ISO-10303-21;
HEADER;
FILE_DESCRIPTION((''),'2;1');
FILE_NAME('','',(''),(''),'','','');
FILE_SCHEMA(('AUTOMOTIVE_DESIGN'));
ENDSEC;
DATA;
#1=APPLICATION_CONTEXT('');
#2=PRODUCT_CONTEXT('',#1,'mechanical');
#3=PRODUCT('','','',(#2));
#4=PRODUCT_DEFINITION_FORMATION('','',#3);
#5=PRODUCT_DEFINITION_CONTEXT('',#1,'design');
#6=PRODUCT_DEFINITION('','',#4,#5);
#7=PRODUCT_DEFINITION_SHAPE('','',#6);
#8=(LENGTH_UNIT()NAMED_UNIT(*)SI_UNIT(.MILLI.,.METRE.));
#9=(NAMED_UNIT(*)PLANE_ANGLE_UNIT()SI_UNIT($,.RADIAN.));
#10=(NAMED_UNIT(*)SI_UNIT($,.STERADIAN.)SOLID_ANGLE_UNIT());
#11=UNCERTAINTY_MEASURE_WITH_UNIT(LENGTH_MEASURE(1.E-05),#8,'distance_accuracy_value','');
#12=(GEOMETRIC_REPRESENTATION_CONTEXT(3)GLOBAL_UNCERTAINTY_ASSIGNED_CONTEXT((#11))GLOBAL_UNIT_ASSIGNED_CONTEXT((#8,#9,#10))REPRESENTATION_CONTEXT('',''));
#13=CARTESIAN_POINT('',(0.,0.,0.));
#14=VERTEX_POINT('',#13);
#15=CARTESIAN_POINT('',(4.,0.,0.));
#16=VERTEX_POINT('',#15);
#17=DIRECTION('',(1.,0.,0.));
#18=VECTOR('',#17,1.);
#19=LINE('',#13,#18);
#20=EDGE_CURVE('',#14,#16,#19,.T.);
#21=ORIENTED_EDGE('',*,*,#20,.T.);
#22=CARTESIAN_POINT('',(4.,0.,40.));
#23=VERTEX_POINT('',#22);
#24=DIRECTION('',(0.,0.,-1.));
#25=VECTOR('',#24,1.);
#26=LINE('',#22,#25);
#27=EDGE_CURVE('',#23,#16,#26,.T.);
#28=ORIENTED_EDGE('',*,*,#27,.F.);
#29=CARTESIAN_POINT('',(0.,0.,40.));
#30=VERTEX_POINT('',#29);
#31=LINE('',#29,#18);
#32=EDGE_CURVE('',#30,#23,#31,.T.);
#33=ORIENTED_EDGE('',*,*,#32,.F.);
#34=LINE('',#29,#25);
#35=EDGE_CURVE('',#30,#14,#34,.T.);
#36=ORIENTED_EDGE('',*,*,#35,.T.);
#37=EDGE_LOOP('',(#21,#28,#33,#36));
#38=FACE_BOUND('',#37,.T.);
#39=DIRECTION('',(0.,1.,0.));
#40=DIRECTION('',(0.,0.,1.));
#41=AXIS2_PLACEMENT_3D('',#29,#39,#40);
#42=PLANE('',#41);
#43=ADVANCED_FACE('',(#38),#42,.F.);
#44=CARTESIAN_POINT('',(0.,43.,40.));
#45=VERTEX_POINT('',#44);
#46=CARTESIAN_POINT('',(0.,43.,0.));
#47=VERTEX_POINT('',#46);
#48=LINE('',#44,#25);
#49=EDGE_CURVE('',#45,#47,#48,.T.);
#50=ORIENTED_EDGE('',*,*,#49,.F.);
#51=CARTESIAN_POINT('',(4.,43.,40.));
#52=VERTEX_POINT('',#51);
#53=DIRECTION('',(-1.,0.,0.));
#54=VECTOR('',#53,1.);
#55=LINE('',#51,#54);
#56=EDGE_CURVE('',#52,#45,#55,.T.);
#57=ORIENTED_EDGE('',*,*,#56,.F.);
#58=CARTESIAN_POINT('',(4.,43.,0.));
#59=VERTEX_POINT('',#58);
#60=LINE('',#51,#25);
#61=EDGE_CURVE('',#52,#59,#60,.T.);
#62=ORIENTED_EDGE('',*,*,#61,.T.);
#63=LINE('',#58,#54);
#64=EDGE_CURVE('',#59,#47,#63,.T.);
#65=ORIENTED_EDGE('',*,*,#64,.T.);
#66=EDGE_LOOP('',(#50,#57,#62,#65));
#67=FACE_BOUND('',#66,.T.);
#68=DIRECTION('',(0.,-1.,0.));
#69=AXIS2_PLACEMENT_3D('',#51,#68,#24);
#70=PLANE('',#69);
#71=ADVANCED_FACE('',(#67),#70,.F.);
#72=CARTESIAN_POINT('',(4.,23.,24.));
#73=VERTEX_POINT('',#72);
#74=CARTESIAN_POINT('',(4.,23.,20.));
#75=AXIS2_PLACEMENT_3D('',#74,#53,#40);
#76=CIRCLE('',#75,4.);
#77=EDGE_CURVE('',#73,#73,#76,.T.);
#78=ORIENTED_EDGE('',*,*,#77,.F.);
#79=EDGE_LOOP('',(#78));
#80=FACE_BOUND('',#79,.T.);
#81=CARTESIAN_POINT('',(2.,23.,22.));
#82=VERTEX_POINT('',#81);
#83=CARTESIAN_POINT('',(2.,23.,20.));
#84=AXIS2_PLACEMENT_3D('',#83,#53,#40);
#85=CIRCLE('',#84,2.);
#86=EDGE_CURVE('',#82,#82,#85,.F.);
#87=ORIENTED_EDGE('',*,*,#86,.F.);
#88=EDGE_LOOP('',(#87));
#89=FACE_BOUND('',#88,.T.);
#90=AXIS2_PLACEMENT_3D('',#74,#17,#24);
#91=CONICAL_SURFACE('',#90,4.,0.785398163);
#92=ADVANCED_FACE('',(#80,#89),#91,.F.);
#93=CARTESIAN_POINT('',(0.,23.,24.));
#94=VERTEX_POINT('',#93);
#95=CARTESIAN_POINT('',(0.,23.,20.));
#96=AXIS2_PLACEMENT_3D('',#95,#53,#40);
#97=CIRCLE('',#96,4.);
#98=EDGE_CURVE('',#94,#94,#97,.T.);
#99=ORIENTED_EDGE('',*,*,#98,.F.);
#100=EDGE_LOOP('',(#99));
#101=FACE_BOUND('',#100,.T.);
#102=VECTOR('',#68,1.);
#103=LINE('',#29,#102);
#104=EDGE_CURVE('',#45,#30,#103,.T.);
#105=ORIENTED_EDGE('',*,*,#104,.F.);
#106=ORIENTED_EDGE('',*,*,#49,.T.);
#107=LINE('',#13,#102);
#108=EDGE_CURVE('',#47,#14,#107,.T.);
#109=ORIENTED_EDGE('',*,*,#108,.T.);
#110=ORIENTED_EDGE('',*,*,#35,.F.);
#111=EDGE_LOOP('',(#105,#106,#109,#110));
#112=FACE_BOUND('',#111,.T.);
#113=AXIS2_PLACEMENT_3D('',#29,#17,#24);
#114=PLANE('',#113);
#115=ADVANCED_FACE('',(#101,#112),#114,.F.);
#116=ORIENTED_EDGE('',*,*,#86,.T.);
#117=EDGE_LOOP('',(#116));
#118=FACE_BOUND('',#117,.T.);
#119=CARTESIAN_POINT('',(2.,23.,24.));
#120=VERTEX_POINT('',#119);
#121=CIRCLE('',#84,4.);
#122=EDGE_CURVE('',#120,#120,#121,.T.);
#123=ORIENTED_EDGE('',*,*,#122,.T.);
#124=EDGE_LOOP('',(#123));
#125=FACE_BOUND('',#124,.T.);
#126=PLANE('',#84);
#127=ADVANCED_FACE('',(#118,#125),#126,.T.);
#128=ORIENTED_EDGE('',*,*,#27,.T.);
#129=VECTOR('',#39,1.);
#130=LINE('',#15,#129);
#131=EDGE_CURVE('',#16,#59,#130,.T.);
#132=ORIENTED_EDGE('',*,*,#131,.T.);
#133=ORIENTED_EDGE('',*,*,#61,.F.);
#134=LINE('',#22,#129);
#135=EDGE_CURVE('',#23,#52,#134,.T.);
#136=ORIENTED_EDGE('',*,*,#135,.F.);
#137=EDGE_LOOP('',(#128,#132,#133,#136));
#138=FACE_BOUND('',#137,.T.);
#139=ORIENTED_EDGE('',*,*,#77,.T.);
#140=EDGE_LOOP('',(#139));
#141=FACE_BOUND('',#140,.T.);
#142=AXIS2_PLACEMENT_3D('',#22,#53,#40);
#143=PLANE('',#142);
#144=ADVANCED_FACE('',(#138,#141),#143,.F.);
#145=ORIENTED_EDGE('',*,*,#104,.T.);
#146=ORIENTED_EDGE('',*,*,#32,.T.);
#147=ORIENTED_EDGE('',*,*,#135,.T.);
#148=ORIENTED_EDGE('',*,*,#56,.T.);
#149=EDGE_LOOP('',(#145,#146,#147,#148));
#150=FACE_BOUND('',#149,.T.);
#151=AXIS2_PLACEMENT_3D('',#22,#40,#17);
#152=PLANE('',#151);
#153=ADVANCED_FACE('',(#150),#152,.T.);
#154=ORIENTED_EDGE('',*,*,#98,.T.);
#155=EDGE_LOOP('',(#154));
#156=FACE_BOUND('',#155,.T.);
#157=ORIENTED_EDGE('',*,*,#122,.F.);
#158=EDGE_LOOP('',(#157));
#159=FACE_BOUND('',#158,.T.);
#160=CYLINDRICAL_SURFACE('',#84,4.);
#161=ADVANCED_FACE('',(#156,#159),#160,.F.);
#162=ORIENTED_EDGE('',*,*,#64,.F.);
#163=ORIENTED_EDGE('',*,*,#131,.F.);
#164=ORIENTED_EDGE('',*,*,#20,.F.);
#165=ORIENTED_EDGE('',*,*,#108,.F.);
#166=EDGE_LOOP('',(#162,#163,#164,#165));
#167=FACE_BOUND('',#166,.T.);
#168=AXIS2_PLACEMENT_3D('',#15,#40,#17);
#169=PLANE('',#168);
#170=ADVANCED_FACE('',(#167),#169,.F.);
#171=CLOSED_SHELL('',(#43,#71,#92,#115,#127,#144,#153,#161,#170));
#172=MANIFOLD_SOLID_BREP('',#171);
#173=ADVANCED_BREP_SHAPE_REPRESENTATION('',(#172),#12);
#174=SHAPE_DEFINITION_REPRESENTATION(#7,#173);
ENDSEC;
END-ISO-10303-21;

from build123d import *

# Parameters (mm, degrees)
ESQUISSE1_W      = 4
ESQUISSE1_H      = 43
EXTRUSION1_DEPTH = 40
ESQUISSE2_R      = 2
EXTRUSION2_DEPTH = 59.864250611
ESQUISSE4_R      = 4
EXTRUSION3_DEPTH = 2
CHANFREIN1_SIZE  = 2


with BuildPart() as part:
    # Esquisse1 → Extrusion1 (new body)
    with BuildSketch(Plane.XY):
        with Locations((2, 21.5)):
            Rectangle(ESQUISSE1_W, ESQUISSE1_H)
    extrude(amount=EXTRUSION1_DEPTH)

    # Esquisse2 → Extrusion2 (cut, through all)
    with BuildSketch(Plane.ZY):
        with Locations((20, 23)):
            Circle(ESQUISSE2_R)
    extrude(amount=-EXTRUSION2_DEPTH, mode=Mode.SUBTRACT)

    # Esquisse4 → Extrusion3 (cut)
    with BuildSketch(Plane.ZY):
        with Locations((20, 23)):
            Circle(ESQUISSE4_R)
    extrude(amount=-EXTRUSION3_DEPTH, mode=Mode.SUBTRACT)

    # Chanfrein1
    chanfrein1_edges = [part.edges().sort_by_distance(p)[0] for p in [
        (4, 23, 18),
    ]]
    chamfer(chanfrein1_edges, length=CHANFREIN1_SIZE - 0.0001)  # a hair under: the kernel refuses the full size


solid = part.part
